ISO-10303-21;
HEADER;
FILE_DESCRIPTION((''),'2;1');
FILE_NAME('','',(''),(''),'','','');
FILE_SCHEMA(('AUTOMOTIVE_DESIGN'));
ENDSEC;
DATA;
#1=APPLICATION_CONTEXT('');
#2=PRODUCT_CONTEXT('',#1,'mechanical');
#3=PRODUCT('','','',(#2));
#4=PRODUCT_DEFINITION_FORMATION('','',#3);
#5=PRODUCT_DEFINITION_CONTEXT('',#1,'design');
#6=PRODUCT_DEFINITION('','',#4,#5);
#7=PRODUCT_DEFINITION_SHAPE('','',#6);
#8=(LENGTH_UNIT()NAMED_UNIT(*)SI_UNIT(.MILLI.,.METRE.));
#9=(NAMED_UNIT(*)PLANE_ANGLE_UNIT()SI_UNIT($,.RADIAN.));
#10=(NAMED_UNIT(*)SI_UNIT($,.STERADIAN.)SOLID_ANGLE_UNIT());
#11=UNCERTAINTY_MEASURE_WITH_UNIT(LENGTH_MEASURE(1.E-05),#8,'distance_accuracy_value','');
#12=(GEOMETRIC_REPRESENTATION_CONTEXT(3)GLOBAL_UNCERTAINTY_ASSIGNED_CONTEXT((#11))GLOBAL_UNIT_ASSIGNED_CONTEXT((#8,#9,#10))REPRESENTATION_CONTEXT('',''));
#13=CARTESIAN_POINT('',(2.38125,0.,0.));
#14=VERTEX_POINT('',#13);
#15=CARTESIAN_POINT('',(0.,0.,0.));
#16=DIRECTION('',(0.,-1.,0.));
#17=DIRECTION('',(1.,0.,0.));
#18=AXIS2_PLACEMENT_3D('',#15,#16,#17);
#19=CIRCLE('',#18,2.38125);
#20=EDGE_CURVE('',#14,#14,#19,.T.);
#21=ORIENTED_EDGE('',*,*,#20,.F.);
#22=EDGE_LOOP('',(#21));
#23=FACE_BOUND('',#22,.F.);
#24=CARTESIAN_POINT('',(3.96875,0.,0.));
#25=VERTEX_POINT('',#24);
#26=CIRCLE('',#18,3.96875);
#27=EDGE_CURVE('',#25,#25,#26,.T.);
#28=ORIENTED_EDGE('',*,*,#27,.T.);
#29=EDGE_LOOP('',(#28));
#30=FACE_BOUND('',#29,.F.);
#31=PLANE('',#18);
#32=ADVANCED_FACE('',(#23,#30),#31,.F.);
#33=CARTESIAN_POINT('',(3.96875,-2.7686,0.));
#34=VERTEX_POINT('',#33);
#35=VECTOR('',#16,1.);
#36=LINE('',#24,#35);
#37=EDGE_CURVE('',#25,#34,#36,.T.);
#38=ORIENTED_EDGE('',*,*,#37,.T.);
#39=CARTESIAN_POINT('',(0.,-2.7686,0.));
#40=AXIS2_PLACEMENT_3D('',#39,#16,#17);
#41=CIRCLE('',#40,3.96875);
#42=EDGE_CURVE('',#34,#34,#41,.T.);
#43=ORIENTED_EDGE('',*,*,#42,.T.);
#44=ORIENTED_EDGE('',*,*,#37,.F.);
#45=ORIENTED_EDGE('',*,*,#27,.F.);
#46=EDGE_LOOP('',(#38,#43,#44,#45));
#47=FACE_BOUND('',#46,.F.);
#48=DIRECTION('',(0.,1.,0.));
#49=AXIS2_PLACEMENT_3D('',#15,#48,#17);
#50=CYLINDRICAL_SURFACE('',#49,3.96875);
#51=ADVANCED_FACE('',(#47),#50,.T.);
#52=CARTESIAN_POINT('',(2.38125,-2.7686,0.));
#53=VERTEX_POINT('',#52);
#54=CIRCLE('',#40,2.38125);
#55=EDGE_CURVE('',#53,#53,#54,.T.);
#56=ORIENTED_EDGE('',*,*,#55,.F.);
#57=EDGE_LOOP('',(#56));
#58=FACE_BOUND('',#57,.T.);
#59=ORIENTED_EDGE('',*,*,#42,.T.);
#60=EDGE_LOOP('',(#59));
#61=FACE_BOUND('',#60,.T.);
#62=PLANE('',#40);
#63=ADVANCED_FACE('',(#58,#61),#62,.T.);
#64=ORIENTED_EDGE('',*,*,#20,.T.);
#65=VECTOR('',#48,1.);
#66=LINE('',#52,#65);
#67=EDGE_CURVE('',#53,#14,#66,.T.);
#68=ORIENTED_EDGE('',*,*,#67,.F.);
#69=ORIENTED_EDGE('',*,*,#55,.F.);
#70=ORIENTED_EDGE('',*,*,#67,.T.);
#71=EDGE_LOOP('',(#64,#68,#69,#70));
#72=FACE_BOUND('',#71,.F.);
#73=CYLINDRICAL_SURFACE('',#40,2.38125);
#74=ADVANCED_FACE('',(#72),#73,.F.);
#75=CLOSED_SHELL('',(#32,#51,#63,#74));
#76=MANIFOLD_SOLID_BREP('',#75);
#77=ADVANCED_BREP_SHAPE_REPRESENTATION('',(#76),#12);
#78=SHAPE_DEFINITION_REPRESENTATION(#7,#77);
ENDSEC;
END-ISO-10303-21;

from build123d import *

# Parameters (mm, degrees)
F0_R          = 3.96875
F1_DEPTH      = 2.7686
F2_R          = 2.38125
F3_DEPTH      = 25.4
F3_DEPTH_BACK = 13


# Not quite as in the source:
# - an extrude ends at something that could not be found from the text; its depth is read off the source's solid


with BuildPart() as f1:
    # F0 (on Front) → F1 (new body)
    with BuildSketch(Plane.XZ):
        Circle(F0_R)
    extrude(amount=F1_DEPTH)

    # F2 (on face) → F3 (cut, two sides)
    with BuildSketch(Plane.XZ.offset(2.7686)) as f3_sk:
        Circle(F2_R)
    extrude(amount=-F3_DEPTH, mode=Mode.SUBTRACT)
    extrude(f3_sk.sketch, amount=F3_DEPTH_BACK, mode=Mode.SUBTRACT)


solid = f1.part
